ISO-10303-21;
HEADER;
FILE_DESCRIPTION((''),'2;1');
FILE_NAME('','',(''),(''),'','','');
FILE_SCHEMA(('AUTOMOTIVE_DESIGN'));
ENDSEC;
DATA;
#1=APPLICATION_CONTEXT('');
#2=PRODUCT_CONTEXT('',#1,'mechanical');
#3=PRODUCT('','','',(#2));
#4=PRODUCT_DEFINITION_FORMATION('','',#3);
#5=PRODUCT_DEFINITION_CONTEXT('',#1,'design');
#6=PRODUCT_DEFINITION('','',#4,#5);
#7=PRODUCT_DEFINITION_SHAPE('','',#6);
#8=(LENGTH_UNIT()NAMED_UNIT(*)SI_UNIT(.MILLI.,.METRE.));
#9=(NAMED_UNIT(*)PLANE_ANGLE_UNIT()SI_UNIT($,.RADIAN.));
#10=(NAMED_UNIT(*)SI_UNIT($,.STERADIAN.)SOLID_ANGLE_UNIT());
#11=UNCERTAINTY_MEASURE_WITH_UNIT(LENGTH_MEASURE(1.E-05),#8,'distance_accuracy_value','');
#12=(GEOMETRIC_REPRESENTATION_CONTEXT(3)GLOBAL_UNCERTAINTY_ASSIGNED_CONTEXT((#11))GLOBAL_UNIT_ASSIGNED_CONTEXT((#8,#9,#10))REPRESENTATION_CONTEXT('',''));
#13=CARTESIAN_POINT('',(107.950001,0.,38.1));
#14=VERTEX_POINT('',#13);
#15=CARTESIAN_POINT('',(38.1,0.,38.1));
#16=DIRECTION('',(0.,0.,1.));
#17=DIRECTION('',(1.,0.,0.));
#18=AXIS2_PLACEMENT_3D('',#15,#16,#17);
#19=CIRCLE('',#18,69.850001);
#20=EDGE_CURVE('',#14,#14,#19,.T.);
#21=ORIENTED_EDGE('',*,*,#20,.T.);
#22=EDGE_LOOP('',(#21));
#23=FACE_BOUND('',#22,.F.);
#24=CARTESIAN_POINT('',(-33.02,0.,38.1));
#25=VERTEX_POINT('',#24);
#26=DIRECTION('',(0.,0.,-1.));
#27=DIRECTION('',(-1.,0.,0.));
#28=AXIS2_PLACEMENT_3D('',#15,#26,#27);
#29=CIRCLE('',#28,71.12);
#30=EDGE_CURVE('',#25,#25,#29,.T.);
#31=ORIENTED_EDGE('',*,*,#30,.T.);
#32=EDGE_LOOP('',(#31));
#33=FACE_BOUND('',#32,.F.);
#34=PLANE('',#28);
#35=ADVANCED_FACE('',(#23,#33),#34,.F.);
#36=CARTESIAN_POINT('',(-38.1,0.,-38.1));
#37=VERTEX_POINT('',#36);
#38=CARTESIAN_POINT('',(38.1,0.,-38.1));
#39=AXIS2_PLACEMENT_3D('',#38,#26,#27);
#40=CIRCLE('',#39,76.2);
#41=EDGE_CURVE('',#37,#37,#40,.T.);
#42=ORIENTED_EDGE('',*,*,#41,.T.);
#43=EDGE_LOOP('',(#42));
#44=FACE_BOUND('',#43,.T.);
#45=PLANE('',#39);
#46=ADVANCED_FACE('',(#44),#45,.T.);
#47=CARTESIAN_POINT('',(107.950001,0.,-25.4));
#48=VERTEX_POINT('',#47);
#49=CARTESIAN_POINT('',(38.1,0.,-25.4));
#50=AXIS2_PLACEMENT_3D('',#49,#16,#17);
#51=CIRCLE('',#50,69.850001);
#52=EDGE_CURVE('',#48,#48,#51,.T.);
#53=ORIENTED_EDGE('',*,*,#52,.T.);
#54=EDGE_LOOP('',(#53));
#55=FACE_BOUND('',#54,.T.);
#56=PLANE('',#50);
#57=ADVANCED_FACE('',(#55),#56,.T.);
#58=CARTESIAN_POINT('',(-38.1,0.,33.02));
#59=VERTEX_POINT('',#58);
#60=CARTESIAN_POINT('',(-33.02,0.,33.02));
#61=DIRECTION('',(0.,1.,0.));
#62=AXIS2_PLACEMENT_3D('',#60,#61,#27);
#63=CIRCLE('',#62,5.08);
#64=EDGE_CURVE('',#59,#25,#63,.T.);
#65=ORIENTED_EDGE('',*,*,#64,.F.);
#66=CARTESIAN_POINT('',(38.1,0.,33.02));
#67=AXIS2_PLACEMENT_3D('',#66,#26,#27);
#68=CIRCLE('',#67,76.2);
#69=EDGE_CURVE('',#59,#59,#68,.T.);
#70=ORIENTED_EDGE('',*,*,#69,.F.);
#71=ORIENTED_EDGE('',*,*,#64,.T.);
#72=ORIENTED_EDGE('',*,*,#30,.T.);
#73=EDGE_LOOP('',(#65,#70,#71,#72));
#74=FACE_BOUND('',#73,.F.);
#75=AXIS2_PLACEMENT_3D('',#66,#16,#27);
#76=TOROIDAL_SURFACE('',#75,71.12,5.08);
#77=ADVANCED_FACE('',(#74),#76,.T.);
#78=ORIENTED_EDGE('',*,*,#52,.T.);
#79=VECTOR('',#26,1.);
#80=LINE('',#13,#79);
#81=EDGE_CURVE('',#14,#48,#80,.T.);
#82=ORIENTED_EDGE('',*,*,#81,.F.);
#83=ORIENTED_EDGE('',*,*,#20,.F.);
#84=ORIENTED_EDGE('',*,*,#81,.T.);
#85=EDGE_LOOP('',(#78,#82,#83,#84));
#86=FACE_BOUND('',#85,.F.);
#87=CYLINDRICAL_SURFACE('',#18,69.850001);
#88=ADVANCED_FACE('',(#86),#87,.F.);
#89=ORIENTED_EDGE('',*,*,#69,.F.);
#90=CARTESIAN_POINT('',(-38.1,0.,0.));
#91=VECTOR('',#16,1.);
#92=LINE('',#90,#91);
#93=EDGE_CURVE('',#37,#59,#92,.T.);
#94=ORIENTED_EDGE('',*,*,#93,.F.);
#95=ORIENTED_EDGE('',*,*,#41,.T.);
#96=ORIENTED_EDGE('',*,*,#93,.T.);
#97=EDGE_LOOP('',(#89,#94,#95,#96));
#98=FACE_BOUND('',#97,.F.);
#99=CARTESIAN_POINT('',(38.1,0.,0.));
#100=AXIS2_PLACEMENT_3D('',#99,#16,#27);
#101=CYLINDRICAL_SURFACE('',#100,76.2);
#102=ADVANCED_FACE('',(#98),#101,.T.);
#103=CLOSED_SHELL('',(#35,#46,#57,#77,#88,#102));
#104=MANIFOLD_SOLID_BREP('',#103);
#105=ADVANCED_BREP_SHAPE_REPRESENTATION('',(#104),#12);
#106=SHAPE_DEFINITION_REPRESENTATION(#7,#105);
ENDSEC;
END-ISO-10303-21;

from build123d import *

# Parameters (mm, degrees)
F0_W     = 76.2
F0_H     = 76.2
F2_R     = 69.8500005424
F3_DEPTH = 63.5
F4_R     = 5.08


with BuildPart() as f1:
    # F0 (on Front) → F1 (revolve)
    with BuildSketch(Plane.XZ):
        Rectangle(F0_W, F0_H)
    revolve(axis=Axis((38.1, 0, 0), (0, 0, -1)))

    # F2 (on face) → F3 (cut)
    with BuildSketch(Plane.XY.offset(38.1)):
        with Locations((38.1, 0)):
            Circle(F2_R)
    extrude(amount=-F3_DEPTH, mode=Mode.SUBTRACT)

    # F4
    f4_edges = [f1.edges().sort_by_distance(p)[0] for p in [
        (114.3, 0, 38.1),
    ]]
    fillet(f4_edges, radius=F4_R)


solid = f1.part
